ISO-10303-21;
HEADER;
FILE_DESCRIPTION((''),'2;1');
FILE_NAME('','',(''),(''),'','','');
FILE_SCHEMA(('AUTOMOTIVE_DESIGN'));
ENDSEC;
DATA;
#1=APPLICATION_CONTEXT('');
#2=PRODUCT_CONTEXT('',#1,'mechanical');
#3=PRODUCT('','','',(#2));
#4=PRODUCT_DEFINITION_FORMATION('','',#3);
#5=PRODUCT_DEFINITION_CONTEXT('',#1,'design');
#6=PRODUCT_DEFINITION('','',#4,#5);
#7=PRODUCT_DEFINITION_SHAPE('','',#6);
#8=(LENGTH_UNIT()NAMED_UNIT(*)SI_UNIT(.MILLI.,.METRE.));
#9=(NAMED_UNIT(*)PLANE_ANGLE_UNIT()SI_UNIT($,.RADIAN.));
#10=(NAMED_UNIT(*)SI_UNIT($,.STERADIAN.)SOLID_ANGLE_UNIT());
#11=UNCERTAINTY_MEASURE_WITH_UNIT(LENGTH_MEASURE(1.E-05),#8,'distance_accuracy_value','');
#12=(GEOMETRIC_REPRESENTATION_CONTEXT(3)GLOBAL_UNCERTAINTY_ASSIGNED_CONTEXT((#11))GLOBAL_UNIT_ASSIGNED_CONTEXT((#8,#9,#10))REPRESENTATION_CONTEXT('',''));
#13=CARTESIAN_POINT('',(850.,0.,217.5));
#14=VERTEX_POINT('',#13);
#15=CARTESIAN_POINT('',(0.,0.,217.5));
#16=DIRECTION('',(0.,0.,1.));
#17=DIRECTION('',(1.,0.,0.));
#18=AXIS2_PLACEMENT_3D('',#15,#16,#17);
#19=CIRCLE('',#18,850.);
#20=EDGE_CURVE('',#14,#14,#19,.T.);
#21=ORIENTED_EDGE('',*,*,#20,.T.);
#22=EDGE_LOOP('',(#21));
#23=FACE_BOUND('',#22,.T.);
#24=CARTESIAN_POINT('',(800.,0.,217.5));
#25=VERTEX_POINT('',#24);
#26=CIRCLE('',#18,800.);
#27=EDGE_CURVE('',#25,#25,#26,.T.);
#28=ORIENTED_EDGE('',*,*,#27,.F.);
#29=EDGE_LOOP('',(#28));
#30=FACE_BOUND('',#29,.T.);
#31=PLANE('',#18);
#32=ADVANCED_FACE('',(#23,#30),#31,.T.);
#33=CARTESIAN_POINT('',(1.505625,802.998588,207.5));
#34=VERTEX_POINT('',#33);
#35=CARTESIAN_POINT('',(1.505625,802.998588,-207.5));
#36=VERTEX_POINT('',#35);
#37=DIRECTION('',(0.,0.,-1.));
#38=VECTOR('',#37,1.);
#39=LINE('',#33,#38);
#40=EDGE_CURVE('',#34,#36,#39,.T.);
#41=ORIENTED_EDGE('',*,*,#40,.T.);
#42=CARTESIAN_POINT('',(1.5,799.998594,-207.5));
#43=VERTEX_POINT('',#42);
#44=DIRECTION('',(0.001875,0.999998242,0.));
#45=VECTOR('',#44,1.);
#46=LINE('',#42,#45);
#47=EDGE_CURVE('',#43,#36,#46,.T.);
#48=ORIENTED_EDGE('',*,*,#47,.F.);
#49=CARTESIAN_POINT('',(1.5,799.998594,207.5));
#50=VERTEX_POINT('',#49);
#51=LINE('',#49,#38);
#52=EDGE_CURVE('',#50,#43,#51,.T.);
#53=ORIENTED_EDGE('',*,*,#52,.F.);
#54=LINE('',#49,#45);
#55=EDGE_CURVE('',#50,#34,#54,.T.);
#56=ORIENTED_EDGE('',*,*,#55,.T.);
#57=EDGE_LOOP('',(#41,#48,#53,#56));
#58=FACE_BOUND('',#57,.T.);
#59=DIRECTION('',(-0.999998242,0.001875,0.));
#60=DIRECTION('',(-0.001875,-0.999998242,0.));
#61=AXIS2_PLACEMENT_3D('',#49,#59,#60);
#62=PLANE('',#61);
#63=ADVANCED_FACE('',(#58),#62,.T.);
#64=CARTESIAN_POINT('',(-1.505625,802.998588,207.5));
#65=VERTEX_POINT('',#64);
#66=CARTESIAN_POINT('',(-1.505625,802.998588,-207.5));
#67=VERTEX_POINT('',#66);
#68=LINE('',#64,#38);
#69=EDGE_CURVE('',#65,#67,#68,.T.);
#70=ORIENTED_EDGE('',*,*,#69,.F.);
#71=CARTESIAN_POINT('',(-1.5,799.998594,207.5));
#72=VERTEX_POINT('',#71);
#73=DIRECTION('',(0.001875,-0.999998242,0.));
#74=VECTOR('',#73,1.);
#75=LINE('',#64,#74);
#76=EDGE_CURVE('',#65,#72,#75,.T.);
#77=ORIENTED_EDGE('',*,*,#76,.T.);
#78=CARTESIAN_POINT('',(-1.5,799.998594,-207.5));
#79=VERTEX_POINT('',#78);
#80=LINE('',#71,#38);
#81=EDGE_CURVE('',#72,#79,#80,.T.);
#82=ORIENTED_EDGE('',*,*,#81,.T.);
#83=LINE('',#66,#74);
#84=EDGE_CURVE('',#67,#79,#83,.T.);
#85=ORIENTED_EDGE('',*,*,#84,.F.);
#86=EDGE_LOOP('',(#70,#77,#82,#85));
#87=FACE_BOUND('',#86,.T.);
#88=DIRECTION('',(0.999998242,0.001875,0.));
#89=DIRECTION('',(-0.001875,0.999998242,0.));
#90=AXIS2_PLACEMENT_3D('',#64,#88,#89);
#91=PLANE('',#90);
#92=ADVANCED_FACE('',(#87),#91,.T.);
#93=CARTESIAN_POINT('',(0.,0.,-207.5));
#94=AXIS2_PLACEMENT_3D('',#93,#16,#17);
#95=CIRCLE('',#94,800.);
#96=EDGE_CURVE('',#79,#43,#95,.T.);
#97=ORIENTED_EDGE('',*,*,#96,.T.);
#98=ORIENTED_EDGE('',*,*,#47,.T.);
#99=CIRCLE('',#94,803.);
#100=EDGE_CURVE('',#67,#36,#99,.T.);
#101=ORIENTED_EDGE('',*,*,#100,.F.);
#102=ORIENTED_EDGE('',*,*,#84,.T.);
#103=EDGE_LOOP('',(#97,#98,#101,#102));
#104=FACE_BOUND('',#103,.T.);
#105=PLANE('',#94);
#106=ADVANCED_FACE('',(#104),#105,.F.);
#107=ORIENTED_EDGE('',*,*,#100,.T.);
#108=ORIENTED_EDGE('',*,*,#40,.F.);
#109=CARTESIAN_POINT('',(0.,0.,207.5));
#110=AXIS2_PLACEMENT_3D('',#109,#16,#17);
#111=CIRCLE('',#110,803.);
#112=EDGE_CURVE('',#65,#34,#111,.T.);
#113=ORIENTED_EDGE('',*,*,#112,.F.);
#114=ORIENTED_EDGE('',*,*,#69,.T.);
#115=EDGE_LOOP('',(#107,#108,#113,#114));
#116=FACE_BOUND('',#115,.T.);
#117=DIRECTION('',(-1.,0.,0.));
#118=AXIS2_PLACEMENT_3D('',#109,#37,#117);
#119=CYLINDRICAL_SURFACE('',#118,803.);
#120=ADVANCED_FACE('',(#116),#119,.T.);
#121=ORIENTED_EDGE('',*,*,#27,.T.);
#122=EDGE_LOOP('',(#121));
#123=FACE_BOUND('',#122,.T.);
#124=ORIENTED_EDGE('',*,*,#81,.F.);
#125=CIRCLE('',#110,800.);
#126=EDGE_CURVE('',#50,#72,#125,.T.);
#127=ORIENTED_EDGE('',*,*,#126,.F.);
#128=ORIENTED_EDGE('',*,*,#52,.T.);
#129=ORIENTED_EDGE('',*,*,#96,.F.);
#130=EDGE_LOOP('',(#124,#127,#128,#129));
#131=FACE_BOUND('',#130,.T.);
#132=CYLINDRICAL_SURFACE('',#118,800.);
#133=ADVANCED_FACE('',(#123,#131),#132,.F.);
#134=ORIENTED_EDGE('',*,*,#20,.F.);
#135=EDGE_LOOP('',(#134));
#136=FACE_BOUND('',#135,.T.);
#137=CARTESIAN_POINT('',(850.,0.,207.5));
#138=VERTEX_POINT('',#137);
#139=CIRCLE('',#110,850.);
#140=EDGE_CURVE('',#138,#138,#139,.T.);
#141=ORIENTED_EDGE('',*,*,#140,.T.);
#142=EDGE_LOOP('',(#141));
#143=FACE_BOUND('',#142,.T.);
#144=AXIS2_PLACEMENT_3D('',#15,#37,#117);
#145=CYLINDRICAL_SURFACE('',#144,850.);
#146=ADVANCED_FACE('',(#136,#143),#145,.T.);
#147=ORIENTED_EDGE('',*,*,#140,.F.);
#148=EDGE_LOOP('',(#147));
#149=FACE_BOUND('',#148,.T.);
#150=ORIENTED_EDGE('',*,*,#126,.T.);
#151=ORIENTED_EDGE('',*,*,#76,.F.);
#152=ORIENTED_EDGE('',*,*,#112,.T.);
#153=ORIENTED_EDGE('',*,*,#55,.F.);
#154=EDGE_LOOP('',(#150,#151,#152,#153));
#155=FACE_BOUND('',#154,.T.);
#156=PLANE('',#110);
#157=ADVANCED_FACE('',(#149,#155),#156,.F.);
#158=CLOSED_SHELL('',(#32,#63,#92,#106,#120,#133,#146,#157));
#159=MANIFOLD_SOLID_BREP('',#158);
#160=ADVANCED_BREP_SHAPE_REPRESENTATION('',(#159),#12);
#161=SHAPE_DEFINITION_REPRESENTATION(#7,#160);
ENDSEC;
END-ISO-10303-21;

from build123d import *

# Parameters (mm, degrees)
BASE_FLANGE1_DEPTH  = 207.5
EXTRUDE_THIN1_START = 10
SKETCH5_R           = 850
SKETCH5_R_2         = 800
EXTRUDE_THIN1_DEPTH = 10


# Sheet-metal steps are written as plain solids
with BuildPart() as part:
    # Sketch2 → Base-Flange1 (new, symmetric)
    with BuildSketch(Plane.XY):
        with BuildLine():
            ThreePointArc((-1.5, 799.998593749), (0, -800), (1.5, 799.998593749))
            Line((1.5, 799.998593749), (1.505625, 802.998588475))
            ThreePointArc((1.505625, 802.998588475), (0, -803), (-1.505625, 802.998588475))
            Line((-1.505625, 802.998588475), (-1.5, 799.998593749))
        make_face()
    extrude(amount=BASE_FLANGE1_DEPTH, both=True)

    # Sketch5 → Extrude-Thin1 (add)
    with BuildSketch(Plane.XY.offset(207.5).offset(EXTRUDE_THIN1_START)):
        Circle(SKETCH5_R)
        Circle(SKETCH5_R_2, mode=Mode.SUBTRACT)
    extrude(amount=-EXTRUDE_THIN1_DEPTH)


solid = part.part
